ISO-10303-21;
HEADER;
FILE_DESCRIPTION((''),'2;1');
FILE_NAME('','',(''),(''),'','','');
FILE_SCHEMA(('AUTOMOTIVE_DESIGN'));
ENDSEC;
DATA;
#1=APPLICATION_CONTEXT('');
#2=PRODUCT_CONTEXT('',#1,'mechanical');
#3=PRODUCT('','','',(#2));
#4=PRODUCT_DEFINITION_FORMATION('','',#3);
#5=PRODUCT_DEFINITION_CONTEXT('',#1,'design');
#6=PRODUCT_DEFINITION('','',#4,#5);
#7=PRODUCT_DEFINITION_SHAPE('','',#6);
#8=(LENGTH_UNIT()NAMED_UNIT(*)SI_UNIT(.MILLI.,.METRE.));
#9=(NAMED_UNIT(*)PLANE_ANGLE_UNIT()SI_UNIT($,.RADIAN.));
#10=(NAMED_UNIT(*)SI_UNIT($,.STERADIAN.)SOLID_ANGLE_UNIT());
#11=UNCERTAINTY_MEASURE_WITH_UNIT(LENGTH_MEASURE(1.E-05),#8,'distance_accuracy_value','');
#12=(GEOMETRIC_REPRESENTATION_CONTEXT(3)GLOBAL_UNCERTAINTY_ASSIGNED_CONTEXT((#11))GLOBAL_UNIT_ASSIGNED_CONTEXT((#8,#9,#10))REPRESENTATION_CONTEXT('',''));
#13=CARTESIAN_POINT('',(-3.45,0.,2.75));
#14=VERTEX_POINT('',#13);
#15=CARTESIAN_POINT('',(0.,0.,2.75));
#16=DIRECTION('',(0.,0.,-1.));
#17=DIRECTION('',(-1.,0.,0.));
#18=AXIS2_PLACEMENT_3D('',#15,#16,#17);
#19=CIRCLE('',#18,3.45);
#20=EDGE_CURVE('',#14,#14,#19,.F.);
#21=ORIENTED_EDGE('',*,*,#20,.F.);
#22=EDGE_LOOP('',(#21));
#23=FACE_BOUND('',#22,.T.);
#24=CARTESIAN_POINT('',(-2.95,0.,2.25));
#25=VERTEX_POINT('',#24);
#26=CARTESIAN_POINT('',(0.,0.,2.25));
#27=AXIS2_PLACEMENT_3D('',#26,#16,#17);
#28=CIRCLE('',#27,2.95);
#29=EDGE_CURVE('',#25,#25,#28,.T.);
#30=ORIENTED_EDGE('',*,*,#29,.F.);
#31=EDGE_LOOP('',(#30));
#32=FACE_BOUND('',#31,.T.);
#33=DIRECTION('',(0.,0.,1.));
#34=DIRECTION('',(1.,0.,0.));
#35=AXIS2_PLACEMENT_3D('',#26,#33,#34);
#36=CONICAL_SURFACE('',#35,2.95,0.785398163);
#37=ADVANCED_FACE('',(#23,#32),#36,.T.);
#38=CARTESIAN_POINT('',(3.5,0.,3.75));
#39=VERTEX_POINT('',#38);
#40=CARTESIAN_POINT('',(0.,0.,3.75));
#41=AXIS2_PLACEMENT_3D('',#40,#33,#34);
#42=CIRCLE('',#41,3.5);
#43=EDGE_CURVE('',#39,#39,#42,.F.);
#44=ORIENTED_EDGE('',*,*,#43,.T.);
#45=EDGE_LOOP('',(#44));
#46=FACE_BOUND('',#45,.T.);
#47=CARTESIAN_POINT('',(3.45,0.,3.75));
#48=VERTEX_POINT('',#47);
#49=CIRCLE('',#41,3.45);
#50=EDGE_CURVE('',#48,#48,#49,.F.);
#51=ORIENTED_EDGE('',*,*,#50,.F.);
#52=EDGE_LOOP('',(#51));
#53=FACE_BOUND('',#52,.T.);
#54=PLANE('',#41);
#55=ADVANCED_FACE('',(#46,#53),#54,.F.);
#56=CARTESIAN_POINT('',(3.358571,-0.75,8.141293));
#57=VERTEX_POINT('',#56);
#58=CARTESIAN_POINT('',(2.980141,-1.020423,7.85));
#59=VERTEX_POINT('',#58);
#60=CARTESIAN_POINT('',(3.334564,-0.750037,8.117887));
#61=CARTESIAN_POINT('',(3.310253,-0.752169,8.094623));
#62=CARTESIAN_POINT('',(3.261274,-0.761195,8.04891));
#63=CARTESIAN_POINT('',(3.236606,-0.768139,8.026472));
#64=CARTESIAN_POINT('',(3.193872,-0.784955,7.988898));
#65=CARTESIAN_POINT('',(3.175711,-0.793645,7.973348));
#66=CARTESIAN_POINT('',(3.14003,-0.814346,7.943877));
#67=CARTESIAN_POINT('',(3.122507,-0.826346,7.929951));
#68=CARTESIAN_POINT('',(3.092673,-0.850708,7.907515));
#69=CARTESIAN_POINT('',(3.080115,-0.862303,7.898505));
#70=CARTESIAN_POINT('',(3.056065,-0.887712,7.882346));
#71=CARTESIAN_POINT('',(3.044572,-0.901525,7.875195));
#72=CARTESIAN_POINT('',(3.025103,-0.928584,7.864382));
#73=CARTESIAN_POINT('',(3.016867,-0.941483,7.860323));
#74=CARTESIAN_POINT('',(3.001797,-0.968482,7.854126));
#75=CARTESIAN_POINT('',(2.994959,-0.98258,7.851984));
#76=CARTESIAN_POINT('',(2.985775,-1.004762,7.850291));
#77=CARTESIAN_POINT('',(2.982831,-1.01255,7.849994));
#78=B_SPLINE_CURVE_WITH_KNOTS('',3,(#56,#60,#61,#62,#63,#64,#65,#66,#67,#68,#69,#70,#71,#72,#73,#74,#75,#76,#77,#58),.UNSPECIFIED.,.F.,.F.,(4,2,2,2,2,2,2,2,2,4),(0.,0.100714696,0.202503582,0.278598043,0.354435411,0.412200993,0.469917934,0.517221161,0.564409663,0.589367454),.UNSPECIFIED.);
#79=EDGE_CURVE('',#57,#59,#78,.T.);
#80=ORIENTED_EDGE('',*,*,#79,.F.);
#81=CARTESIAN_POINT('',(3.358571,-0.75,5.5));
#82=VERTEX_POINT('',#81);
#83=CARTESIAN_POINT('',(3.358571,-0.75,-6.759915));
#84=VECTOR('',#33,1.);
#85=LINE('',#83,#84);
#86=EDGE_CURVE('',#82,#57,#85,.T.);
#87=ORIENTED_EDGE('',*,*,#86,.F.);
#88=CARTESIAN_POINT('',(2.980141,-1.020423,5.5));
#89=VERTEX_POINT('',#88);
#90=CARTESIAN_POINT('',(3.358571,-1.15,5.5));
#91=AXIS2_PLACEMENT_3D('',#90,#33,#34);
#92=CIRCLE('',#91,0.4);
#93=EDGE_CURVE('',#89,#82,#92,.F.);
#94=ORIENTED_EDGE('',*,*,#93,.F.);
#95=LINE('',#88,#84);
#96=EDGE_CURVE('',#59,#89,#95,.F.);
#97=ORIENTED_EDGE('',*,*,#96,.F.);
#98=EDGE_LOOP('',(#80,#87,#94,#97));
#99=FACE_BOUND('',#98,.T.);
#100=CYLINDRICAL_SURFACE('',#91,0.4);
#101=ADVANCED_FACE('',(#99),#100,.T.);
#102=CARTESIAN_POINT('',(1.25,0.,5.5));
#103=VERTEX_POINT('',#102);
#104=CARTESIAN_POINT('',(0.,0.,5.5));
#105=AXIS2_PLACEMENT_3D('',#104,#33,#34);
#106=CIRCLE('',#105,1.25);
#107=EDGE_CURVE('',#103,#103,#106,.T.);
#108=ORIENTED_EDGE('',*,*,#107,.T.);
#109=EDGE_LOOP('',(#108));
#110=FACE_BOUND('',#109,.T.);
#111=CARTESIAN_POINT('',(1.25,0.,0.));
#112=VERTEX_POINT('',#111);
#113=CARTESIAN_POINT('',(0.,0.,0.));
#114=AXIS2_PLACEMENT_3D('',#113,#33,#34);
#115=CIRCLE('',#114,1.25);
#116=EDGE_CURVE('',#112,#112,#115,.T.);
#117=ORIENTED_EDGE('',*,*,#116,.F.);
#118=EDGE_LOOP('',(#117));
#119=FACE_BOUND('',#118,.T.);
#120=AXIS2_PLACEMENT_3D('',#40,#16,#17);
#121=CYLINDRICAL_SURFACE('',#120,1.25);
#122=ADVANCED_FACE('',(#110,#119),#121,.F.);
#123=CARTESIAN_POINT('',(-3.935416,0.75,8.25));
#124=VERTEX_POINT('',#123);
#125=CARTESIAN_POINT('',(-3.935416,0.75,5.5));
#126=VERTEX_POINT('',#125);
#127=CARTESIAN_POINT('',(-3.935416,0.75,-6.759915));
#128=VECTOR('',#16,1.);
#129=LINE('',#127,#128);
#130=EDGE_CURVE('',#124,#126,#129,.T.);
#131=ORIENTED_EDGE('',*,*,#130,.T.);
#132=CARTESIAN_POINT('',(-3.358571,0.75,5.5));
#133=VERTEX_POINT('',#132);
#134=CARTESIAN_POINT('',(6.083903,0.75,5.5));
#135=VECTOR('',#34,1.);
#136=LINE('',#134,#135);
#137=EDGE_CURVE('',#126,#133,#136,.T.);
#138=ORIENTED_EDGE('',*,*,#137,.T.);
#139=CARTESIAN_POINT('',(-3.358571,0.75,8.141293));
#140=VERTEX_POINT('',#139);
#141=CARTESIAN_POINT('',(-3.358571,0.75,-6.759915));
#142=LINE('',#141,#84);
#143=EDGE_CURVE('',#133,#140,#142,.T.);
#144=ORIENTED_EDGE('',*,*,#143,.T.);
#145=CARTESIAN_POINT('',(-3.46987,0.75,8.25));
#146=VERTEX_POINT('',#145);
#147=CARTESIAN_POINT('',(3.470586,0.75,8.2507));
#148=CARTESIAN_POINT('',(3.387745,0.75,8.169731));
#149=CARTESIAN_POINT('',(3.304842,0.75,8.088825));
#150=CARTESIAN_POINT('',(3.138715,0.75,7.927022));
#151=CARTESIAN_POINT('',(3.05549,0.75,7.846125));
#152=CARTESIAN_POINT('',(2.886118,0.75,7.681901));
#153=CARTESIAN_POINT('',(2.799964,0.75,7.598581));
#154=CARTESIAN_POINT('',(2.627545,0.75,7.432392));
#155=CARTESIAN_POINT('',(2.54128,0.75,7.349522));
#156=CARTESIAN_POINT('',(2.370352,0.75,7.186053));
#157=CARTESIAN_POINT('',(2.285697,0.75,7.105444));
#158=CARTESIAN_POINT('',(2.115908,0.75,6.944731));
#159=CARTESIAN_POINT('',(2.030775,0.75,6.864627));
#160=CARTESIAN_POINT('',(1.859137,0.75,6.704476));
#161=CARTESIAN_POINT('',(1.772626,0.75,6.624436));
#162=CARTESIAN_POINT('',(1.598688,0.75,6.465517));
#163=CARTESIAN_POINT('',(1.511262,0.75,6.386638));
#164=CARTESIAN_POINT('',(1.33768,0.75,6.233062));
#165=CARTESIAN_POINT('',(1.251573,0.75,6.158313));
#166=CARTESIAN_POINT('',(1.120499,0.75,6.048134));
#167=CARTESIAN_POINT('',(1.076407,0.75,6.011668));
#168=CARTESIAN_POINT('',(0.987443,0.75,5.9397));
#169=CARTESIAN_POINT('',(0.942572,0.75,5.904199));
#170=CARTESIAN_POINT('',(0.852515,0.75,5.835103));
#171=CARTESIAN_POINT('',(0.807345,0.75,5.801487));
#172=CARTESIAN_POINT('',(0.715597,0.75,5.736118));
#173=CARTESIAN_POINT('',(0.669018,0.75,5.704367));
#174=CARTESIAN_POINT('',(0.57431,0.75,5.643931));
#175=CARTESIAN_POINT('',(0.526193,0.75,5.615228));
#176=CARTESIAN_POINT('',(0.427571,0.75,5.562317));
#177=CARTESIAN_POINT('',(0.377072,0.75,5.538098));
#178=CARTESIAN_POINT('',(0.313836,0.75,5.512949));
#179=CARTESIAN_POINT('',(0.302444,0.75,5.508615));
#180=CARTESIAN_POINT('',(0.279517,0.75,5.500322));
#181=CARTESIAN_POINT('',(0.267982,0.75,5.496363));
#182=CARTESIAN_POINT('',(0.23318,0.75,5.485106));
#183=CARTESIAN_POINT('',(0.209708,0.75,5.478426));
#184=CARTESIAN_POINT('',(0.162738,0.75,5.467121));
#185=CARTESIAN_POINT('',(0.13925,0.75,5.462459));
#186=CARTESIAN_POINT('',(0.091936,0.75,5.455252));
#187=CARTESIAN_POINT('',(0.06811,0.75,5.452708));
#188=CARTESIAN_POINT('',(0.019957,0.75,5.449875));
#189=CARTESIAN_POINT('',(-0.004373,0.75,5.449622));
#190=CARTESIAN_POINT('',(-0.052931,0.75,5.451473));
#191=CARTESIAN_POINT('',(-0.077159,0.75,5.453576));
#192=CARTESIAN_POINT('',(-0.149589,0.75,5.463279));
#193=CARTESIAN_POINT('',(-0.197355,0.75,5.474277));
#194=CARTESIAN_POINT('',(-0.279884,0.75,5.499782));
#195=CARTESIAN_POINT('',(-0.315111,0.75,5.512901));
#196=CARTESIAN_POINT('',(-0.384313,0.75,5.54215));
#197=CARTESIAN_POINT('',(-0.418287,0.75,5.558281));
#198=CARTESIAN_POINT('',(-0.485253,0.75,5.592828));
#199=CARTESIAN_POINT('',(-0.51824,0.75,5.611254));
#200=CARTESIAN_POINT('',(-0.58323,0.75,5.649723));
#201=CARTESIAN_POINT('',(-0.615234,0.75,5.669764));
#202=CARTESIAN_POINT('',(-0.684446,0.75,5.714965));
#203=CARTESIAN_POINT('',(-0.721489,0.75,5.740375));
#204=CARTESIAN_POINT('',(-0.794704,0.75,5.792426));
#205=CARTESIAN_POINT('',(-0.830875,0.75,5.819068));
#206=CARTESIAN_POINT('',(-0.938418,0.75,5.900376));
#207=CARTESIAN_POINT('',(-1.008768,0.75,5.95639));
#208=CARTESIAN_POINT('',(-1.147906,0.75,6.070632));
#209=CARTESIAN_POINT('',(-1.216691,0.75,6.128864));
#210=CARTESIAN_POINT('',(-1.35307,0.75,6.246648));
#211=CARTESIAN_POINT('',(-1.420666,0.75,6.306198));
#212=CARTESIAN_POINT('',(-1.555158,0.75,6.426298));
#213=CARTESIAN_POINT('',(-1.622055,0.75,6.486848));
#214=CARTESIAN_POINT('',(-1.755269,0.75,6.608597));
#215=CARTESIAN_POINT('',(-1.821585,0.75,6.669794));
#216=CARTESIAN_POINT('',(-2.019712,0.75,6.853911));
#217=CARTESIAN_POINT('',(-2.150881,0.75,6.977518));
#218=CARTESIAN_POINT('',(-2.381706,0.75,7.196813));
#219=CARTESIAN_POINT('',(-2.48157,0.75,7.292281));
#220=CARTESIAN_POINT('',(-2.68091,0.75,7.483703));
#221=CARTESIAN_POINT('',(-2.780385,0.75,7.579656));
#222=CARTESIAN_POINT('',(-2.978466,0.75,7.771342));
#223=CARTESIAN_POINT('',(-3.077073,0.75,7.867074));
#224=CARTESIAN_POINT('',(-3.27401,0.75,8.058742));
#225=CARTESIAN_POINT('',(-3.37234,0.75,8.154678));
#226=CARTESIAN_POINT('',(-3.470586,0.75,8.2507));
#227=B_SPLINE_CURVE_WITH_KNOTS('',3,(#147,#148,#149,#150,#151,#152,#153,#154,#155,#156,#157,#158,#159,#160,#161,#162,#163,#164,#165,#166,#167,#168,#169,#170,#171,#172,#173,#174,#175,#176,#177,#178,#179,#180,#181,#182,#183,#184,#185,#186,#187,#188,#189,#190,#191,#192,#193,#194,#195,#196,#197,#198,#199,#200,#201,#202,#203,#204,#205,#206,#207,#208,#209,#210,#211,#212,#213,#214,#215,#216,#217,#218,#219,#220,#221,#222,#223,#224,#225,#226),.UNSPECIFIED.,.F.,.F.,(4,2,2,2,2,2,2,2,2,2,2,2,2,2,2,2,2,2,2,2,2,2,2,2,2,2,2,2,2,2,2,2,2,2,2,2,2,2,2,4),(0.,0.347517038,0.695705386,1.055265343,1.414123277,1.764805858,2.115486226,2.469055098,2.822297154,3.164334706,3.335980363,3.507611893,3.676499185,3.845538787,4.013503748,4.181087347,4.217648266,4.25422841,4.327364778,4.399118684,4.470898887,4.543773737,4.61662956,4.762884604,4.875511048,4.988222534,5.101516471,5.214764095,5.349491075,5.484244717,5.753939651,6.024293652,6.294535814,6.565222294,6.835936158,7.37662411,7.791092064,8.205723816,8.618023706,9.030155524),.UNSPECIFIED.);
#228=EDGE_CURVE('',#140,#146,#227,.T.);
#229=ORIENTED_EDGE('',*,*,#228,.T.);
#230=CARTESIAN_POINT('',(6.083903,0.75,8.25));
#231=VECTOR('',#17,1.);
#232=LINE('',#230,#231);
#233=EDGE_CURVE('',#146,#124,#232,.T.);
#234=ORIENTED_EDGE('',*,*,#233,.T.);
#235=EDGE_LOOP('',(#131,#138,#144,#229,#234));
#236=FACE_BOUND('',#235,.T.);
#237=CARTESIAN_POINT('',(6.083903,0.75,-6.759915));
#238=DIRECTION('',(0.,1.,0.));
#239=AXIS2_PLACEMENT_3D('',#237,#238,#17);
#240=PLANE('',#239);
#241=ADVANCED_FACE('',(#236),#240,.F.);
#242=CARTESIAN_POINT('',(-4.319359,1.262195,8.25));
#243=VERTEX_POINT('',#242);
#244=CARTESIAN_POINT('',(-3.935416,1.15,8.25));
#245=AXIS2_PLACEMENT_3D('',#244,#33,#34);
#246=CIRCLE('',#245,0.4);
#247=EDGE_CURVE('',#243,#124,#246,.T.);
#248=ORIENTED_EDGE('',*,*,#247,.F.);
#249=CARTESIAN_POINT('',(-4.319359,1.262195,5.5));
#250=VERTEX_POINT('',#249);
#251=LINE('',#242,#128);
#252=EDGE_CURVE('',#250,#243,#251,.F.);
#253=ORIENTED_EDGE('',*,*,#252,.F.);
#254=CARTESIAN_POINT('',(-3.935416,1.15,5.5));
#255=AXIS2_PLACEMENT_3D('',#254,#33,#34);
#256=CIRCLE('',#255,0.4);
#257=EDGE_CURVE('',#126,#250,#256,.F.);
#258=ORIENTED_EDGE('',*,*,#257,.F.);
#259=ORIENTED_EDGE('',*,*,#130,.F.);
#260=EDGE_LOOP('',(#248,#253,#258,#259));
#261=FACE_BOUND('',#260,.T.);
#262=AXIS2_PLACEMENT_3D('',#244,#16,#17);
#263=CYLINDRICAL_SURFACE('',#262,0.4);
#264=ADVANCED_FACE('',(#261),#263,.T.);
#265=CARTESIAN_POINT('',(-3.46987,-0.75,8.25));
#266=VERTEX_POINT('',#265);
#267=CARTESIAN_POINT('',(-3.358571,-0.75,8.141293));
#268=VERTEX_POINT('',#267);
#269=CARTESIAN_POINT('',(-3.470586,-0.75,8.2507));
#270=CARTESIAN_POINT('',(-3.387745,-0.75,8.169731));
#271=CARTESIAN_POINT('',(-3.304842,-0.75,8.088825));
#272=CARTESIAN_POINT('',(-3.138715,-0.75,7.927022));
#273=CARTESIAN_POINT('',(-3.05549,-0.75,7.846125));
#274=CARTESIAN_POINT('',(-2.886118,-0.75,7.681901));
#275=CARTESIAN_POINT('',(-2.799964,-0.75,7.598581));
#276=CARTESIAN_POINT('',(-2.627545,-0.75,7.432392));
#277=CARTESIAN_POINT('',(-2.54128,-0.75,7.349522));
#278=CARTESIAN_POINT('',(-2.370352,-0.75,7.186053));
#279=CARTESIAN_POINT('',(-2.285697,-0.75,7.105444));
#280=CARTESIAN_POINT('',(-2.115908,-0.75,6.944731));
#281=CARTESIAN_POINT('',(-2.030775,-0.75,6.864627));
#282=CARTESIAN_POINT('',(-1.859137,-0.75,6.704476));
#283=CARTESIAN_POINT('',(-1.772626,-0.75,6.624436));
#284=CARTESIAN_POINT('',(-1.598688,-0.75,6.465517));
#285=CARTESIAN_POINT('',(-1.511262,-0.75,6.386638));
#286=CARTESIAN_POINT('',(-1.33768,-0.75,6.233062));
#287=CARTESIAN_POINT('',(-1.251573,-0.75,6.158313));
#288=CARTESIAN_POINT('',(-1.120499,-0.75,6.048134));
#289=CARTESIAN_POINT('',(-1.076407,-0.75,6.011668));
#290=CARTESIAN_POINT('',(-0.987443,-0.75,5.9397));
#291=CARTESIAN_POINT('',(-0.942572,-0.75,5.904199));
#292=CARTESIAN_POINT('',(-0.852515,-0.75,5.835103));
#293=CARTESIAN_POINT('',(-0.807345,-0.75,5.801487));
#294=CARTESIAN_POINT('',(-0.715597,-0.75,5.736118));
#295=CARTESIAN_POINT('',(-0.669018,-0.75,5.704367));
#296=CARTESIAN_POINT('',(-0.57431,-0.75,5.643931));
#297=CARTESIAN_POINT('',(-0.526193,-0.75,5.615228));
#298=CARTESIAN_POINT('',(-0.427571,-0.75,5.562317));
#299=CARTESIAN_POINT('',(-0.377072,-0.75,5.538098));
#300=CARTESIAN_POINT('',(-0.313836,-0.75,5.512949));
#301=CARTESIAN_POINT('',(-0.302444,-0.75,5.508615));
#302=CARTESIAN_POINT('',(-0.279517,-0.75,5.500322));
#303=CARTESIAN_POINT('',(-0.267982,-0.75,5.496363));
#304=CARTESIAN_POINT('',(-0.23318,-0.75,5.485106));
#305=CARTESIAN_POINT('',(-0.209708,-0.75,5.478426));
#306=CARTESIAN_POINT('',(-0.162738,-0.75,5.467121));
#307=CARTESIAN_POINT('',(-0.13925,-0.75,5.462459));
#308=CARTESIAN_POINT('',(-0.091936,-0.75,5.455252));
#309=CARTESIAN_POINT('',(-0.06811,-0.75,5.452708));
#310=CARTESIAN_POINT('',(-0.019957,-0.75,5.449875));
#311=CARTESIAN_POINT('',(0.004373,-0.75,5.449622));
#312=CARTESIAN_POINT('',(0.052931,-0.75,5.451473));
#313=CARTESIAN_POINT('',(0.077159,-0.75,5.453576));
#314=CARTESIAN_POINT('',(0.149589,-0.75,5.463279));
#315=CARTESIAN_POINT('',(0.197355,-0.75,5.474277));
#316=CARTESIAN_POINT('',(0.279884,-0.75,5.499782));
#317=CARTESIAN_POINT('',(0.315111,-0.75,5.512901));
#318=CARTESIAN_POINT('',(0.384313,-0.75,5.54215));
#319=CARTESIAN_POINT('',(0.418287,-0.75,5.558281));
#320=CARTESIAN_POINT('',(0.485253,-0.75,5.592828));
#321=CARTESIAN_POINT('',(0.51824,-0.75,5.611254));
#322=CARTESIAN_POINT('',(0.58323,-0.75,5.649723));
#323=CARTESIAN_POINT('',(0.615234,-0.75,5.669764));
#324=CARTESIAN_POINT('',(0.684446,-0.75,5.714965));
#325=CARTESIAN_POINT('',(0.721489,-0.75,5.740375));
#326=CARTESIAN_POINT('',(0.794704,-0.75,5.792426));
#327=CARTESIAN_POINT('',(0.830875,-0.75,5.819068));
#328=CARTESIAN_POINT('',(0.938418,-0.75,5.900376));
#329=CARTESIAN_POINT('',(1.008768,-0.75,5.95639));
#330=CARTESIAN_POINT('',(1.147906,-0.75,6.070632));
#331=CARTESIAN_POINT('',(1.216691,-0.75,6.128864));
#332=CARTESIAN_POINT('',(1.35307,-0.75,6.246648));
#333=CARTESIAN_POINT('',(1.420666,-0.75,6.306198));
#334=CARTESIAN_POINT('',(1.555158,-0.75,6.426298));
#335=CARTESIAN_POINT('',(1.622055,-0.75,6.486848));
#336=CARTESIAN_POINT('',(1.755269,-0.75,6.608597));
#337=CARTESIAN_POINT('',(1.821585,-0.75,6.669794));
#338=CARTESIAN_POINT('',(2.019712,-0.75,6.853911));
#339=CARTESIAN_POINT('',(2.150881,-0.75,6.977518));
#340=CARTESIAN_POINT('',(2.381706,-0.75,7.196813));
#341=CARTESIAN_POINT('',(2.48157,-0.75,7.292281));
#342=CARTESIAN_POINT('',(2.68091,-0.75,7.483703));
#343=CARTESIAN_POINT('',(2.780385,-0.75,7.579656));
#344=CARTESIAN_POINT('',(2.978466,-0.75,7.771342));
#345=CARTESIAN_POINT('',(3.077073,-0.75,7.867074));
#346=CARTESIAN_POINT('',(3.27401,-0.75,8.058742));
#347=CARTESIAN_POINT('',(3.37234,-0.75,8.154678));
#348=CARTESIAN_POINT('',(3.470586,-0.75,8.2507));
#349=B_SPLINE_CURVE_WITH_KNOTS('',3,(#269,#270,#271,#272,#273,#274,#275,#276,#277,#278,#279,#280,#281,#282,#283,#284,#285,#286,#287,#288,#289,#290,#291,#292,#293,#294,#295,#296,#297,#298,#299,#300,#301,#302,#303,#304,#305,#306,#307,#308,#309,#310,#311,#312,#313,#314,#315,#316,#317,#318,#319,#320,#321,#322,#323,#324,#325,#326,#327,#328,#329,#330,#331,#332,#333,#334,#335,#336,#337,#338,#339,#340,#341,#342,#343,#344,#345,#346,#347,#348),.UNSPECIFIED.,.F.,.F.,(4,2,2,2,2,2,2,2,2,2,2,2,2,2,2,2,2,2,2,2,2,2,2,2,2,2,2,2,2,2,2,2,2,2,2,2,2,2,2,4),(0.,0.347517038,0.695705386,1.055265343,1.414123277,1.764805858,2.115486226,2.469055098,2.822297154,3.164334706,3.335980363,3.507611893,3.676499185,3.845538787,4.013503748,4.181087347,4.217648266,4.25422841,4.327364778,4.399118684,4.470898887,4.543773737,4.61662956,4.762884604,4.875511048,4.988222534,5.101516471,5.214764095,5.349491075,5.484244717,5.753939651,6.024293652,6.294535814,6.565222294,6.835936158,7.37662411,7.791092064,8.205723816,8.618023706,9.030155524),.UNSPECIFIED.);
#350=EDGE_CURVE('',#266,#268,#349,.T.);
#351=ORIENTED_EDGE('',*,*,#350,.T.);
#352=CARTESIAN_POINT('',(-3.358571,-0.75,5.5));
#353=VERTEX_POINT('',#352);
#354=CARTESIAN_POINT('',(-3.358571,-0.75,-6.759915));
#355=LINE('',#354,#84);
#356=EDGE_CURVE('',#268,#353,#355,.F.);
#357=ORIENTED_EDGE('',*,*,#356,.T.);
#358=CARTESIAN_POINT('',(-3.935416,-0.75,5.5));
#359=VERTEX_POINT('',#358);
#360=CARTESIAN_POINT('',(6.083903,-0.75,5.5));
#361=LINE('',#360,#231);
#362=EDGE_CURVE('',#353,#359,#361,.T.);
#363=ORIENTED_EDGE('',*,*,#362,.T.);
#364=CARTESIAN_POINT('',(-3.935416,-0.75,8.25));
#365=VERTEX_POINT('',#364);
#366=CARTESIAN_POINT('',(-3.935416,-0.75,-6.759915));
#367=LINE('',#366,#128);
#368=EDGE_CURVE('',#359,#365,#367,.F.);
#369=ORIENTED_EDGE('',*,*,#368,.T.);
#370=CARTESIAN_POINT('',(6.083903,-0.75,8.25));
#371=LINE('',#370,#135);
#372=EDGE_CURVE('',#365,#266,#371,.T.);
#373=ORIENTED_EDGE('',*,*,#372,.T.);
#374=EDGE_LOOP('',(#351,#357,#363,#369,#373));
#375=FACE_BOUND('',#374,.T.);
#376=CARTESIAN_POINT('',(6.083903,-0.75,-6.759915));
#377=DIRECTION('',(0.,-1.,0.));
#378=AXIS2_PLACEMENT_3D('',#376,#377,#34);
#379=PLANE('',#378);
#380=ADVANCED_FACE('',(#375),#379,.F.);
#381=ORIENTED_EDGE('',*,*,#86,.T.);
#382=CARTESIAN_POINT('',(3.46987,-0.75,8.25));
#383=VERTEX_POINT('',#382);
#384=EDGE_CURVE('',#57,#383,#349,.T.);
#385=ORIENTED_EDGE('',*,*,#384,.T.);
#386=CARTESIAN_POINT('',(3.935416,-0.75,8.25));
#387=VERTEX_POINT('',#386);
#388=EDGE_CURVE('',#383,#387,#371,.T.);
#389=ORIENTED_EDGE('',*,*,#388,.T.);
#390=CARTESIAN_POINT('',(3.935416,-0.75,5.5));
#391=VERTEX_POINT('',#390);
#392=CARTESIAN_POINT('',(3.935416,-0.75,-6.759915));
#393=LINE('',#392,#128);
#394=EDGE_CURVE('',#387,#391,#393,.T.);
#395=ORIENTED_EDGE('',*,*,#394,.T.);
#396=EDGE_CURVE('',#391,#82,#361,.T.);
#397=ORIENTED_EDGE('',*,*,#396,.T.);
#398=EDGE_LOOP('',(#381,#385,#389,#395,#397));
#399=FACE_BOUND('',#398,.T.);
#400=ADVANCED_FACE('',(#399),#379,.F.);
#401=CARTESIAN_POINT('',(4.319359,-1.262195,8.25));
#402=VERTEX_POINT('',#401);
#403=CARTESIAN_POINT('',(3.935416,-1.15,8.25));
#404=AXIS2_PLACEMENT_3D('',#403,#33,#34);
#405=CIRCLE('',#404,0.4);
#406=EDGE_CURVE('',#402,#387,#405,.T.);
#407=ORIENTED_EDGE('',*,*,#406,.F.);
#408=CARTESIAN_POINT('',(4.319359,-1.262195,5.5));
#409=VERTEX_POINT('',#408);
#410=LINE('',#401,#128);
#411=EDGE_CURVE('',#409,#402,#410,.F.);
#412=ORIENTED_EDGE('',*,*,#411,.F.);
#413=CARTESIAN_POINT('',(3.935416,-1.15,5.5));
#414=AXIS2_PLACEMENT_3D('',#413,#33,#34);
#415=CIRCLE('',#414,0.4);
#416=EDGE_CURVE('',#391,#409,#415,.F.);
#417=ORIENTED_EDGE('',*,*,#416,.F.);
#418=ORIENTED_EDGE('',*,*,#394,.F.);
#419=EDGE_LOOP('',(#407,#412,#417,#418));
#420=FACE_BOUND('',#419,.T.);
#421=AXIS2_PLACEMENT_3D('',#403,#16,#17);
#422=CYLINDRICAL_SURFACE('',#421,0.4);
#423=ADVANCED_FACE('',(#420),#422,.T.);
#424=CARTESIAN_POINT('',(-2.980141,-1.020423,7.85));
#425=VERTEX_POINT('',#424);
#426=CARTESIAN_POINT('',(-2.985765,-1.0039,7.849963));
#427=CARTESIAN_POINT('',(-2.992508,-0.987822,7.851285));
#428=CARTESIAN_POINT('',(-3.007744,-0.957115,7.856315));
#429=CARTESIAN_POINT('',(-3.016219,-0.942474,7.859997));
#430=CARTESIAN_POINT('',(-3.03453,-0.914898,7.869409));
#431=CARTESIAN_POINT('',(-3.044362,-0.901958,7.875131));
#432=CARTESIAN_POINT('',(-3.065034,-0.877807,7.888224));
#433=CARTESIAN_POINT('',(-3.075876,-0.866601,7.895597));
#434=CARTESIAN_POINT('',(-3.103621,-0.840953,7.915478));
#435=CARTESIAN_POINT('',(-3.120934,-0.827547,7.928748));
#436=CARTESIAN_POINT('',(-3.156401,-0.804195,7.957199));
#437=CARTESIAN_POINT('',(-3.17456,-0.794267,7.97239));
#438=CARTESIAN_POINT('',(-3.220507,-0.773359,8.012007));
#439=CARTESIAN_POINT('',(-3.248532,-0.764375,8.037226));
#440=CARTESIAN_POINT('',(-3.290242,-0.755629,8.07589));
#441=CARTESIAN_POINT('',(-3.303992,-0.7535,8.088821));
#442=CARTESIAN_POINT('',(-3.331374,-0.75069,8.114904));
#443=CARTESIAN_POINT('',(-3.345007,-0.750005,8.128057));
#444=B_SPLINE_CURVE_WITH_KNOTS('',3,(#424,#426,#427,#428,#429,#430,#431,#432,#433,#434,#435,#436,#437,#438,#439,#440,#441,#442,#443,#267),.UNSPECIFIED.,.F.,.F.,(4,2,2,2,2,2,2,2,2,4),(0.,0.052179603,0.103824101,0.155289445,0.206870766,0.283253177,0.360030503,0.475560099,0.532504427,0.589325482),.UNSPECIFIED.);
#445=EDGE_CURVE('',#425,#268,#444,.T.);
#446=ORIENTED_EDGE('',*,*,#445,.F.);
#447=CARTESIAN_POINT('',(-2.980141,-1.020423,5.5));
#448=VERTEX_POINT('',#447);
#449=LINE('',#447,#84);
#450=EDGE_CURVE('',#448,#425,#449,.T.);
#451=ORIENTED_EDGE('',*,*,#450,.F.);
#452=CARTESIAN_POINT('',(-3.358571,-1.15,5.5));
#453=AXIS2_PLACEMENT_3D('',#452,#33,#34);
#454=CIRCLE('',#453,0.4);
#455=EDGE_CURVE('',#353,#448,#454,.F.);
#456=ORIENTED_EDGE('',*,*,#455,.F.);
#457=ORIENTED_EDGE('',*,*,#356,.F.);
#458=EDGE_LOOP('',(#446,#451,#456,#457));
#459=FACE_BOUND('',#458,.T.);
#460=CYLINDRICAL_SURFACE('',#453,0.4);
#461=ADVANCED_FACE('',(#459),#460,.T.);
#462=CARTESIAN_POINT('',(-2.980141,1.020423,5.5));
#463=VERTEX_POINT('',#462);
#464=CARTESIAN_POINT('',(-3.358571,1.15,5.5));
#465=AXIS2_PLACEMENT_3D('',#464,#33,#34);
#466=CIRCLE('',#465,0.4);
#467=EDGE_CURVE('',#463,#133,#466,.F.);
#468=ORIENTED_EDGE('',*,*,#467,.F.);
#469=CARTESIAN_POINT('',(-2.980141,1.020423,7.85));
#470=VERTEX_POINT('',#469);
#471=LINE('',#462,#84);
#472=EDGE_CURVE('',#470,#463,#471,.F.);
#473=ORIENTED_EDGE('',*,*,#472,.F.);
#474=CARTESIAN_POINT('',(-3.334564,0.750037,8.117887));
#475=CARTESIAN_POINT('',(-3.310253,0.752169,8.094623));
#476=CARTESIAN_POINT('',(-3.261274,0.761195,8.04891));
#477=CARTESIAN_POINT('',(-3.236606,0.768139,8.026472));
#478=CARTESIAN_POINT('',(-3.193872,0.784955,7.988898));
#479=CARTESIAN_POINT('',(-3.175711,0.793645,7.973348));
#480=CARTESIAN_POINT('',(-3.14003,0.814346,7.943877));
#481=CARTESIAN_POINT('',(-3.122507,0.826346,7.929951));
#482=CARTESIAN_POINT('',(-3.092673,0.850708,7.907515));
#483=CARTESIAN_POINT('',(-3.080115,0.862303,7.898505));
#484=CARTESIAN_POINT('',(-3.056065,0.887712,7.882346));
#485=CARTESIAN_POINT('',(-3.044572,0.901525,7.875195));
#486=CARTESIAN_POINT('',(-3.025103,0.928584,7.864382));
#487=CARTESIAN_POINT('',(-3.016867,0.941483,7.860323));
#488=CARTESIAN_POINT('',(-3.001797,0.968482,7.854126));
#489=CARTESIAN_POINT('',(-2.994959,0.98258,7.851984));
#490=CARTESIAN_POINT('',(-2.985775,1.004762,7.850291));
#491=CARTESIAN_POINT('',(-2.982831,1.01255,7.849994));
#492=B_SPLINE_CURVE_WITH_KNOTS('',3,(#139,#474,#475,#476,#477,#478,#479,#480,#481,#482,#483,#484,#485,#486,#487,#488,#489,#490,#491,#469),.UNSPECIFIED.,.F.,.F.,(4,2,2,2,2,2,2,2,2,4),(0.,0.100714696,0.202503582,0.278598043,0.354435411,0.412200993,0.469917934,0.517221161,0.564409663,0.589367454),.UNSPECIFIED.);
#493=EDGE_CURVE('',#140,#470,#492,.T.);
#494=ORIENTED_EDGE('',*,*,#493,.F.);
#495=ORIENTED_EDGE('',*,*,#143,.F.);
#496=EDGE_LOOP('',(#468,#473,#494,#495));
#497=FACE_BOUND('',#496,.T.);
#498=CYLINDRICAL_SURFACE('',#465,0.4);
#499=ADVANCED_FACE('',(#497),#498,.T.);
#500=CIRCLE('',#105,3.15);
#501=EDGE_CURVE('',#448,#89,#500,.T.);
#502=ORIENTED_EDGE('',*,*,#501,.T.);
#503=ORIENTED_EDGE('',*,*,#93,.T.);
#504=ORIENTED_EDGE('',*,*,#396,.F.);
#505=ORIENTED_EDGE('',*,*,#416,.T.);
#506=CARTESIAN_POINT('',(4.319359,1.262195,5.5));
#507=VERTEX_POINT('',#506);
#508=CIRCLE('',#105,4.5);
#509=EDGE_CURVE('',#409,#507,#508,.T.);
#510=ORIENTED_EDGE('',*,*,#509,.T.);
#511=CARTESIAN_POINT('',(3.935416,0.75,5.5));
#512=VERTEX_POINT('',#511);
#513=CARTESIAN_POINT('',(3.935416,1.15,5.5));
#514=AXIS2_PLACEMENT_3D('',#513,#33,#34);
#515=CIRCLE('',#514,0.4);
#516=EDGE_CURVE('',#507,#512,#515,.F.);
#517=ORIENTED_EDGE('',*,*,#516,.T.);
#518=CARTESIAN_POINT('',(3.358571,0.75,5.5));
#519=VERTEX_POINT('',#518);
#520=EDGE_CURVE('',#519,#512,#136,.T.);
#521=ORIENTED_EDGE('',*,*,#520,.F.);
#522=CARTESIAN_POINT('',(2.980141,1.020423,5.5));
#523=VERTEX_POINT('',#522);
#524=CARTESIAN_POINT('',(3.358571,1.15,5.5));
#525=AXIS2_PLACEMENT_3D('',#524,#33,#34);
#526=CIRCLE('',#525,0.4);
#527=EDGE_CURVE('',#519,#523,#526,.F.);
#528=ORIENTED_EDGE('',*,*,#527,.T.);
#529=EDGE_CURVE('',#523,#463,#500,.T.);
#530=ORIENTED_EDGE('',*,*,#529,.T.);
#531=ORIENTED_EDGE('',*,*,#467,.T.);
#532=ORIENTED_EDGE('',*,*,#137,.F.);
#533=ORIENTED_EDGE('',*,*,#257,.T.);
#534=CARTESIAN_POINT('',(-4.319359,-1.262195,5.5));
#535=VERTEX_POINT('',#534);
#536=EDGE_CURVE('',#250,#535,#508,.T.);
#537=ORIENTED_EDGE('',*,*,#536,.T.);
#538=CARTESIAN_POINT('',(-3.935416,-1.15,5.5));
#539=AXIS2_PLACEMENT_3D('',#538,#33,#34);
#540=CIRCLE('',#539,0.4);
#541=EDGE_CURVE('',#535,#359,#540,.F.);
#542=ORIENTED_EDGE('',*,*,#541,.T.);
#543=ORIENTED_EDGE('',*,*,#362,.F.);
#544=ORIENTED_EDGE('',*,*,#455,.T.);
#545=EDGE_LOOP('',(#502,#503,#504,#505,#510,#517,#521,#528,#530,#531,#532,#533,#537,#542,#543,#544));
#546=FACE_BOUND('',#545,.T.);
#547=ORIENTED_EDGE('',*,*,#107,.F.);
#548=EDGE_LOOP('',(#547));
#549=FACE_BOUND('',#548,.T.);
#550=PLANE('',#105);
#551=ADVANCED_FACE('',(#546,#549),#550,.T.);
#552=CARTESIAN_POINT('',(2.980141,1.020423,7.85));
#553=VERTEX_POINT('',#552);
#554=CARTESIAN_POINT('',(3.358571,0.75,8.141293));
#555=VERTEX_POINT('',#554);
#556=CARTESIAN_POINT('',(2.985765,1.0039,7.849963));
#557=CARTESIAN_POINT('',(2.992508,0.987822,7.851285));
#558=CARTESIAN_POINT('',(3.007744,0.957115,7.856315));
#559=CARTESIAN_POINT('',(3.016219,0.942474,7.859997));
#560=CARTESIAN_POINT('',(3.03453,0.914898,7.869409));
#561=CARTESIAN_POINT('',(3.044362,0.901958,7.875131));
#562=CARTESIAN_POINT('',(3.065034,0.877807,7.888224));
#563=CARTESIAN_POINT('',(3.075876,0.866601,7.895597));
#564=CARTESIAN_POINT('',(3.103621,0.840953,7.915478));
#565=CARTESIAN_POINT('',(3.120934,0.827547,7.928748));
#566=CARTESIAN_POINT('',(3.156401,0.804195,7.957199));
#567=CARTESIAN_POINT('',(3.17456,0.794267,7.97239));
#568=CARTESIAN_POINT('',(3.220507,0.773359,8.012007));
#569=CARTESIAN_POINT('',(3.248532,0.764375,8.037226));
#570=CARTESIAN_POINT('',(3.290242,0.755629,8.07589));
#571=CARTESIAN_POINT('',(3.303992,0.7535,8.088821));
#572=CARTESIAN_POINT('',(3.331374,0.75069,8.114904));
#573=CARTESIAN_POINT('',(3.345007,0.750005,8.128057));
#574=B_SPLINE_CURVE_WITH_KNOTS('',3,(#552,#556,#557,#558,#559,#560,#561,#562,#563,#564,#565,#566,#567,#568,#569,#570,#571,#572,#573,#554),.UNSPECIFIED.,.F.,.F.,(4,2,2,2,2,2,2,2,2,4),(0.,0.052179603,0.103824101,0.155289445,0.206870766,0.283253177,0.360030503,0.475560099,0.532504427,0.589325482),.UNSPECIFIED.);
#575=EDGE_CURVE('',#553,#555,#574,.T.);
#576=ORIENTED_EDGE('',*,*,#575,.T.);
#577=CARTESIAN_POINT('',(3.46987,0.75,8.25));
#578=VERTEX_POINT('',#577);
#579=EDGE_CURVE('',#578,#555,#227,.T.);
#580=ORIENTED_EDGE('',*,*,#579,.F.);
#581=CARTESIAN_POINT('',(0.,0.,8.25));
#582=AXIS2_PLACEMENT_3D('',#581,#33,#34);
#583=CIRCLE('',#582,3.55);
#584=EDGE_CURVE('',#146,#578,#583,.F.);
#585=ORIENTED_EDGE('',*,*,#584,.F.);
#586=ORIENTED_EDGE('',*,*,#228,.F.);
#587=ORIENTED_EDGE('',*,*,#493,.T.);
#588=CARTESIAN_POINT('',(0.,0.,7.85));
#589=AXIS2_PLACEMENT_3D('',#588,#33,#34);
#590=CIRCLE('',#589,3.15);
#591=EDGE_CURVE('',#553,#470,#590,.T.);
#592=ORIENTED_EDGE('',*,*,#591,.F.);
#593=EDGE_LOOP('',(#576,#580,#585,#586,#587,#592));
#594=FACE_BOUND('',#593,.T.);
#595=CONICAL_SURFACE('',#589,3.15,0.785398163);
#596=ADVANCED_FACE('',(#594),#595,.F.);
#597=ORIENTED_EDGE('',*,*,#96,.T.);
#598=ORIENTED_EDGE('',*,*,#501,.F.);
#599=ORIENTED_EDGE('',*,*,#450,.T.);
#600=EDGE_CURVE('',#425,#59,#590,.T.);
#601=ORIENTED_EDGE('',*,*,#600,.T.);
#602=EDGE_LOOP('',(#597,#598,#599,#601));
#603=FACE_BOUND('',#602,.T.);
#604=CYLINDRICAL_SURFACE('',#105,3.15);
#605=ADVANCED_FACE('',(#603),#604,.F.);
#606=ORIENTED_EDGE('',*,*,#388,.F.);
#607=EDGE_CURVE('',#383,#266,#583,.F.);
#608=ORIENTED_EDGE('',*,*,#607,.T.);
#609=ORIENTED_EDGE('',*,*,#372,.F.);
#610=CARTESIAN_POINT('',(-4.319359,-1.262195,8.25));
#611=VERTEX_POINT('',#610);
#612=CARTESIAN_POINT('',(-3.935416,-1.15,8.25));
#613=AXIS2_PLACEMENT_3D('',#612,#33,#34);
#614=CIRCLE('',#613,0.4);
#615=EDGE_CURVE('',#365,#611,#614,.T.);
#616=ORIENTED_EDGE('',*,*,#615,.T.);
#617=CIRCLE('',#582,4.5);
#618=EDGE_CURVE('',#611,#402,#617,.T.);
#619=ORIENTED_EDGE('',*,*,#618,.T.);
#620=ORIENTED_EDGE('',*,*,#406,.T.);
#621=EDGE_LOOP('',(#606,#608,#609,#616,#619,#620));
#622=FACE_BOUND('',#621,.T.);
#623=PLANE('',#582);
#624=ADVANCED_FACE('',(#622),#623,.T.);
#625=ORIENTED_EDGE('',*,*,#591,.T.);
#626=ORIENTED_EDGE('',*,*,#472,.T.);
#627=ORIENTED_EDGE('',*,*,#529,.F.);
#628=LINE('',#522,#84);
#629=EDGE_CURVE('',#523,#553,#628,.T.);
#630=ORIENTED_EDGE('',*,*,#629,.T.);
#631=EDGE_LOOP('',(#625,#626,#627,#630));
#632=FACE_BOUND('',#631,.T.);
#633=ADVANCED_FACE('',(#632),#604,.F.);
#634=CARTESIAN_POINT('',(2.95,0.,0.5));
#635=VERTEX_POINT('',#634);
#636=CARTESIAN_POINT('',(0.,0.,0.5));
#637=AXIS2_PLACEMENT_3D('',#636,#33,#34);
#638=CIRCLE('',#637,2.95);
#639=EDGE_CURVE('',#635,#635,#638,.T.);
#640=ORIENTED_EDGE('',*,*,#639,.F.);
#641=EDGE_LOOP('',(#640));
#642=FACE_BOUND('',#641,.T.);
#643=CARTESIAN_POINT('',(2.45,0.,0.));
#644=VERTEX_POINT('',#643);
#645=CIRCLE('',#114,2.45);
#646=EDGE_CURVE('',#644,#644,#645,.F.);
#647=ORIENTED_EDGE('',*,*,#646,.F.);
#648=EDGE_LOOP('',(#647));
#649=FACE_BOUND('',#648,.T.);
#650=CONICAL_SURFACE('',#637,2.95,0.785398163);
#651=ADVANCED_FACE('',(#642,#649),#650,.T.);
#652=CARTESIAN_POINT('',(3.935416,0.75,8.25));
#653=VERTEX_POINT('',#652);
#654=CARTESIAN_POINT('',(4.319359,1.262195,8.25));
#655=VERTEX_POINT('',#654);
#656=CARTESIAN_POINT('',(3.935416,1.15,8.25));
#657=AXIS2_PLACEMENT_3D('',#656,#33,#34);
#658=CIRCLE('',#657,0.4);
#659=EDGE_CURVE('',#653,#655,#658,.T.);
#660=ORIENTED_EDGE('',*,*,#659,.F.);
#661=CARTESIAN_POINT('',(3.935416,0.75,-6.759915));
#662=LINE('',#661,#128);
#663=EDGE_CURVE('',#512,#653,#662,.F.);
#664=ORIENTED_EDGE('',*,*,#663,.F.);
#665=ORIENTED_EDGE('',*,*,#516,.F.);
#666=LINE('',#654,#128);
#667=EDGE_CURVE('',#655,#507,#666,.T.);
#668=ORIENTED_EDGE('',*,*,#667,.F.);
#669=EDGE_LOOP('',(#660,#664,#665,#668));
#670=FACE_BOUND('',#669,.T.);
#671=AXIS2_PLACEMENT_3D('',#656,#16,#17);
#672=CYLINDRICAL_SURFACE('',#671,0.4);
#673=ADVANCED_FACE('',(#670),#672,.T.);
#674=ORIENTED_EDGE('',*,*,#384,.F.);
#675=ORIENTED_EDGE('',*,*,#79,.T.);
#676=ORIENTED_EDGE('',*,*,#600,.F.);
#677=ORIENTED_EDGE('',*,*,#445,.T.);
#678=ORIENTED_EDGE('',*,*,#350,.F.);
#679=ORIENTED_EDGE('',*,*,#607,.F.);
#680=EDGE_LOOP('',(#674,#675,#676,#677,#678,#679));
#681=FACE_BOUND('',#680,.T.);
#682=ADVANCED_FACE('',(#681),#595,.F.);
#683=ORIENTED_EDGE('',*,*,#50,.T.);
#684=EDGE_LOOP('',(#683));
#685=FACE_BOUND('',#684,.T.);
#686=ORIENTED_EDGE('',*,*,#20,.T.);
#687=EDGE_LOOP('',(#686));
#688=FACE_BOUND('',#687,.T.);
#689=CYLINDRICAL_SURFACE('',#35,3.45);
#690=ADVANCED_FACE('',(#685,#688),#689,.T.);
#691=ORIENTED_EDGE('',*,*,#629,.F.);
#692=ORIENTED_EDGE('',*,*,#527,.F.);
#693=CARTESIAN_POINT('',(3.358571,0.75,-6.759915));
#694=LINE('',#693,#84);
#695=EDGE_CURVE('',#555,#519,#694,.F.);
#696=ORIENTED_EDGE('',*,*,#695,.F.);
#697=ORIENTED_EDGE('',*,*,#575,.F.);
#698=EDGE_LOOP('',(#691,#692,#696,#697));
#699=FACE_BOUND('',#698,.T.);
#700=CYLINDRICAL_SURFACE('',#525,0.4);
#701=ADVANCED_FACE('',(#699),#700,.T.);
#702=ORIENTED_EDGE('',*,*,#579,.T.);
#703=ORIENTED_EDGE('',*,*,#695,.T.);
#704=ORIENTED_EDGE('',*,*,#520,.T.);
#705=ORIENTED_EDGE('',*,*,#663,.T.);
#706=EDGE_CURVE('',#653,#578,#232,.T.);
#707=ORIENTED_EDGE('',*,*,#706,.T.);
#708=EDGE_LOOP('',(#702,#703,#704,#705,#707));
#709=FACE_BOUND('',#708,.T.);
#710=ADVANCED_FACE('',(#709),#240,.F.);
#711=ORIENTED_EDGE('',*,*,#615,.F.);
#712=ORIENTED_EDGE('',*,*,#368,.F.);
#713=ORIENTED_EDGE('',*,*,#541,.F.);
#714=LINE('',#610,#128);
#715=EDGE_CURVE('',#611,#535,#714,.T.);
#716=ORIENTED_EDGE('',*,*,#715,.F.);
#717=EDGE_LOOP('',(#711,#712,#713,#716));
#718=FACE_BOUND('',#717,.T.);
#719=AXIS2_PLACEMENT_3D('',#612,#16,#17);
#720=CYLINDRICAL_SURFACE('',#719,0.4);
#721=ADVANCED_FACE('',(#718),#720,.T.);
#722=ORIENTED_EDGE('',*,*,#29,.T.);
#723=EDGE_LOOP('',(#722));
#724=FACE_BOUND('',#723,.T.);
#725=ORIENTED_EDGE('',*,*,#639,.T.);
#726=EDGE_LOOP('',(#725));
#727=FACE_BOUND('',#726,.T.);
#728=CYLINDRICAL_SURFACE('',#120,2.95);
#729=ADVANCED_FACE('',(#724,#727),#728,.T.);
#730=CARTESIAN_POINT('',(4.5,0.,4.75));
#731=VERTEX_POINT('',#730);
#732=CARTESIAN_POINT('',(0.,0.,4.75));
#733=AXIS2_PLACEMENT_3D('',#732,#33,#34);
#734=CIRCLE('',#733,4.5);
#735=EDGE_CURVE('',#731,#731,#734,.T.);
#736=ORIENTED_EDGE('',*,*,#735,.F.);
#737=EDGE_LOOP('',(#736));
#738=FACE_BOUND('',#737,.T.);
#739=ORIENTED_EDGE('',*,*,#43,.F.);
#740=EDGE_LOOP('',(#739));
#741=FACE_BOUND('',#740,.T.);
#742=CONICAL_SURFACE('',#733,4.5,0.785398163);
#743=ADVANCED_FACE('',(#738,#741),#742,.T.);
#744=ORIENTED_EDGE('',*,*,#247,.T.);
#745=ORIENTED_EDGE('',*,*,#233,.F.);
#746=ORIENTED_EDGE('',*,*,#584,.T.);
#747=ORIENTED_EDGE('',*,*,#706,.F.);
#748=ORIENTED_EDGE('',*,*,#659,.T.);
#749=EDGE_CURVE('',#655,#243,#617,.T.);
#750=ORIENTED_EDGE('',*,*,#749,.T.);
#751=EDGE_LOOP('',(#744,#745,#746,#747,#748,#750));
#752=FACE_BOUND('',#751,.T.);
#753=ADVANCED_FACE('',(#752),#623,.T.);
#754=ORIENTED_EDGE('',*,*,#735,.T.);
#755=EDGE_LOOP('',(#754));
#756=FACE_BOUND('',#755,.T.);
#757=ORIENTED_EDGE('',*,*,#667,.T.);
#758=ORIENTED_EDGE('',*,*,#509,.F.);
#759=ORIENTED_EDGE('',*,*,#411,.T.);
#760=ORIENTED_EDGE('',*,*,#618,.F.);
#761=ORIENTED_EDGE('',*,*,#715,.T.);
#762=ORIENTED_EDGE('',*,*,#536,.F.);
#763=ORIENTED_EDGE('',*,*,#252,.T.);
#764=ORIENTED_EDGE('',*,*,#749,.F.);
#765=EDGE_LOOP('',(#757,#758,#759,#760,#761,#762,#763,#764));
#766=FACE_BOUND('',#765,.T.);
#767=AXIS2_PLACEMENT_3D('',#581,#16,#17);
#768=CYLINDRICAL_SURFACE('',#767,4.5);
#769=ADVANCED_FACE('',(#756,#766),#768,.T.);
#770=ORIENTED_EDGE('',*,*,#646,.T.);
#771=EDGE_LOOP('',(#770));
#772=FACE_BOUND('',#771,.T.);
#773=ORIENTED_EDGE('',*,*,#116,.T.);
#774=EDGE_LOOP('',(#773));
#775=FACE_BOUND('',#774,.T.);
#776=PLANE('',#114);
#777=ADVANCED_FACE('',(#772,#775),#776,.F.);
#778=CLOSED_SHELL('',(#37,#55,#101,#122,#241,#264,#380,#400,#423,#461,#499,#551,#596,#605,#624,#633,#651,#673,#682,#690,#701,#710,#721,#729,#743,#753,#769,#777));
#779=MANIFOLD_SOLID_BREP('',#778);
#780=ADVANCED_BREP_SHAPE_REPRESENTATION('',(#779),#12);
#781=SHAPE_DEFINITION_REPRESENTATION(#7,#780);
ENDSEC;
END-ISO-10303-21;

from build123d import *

# Parameters (mm, degrees)
SKETCH1_R           = 2.95
SKETCH1_R_2         = 1.25
BOSS_EXTRUDE1_DEPTH = 3.75
SKETCH2_R           = 4.5
SKETCH2_R_2         = 1.25
BOSS_EXTRUDE2_DEPTH = 4.5
SKETCH3_R           = 3.15
CUT_EXTRUDE1_DEPTH  = 2.75
CHAMFER1_SIZE       = 0.4
CHAMFER2_SIZE       = 0.5
BOSS_EXTRUDE3_START = 1.5
SKETCH4_R           = 3.45
SKETCH4_R_2         = 1.25
BOSS_EXTRUDE3_DEPTH = 1.5
CHAMFER3_SIZE       = 1
CHAMFER6_SIZE       = 0.5
CUT_EXTRUDE2_REACH  = 12.419
SKETCH5_W           = 12.167806538
SKETCH5_H           = 1.5
FILLET1_R           = 0.4


with BuildPart() as part:
    # Sketch1 → Boss-Extrude1 (new body)
    with BuildSketch(Plane.XY):
        Circle(SKETCH1_R)
        Circle(SKETCH1_R_2, mode=Mode.SUBTRACT)
    extrude(amount=BOSS_EXTRUDE1_DEPTH)

    # Sketch2 → Boss-Extrude2 (add)
    with BuildSketch(Plane.XY.offset(3.75)):
        Circle(SKETCH2_R)
        Circle(SKETCH2_R_2, mode=Mode.SUBTRACT)
    extrude(amount=BOSS_EXTRUDE2_DEPTH)

    # Sketch3 → Cut-Extrude1 (cut)
    with BuildSketch(Plane.XY.offset(8.25)):
        Circle(SKETCH3_R)
    extrude(amount=-CUT_EXTRUDE1_DEPTH, mode=Mode.SUBTRACT)

    # Chamfer1
    chamfer1_edges = [part.edges().sort_by_distance(p)[0] for p in [
        (-3.15, 0, 8.25),
    ]]
    chamfer(chamfer1_edges, length=CHAMFER1_SIZE)

    # Chamfer2
    chamfer2_edges = [part.edges().sort_by_distance(p)[0] for p in [
        (-2.95, 0, 0),
    ]]
    chamfer(chamfer2_edges, length=CHAMFER2_SIZE)

    # Sketch4 → Boss-Extrude3 (add)
    with BuildSketch(Plane(origin=(0, 0, 3.75), x_dir=(-1, 0, 0), z_dir=(0, 0, -1)).offset(BOSS_EXTRUDE3_START)):
        with Locations(Location((0, 0, 0), (0, 0, 180))):
            Circle(SKETCH4_R)
        with Locations(Location((0, 0, 0), (0, 0, 180))):
            Circle(SKETCH4_R_2, mode=Mode.SUBTRACT)
    extrude(amount=-BOSS_EXTRUDE3_DEPTH)

    # Chamfer3
    chamfer3_edges = [part.edges().sort_by_distance(p)[0] for p in [
        (-4.5, 0, 3.75),
    ]]
    chamfer(chamfer3_edges, length=CHAMFER3_SIZE)

    # Chamfer6
    chamfer6_edges = [part.edges().sort_by_distance(p)[0] for p in [
        (-3.45, 0, 2.25),
    ]]
    chamfer(chamfer6_edges, length=CHAMFER6_SIZE - 0.0001)  # a hair under: the kernel refuses the full size

    # Cut-Extrude2: up to this face of the body (flat: up to its plane)
    cut_extrude2_end = Plane(part.part.faces().sort_by_distance((-3.060904546, 0, 5.5))[0])
    # Sketch5 → Cut-Extrude2 (cut, up to the picked face)
    with BuildSketch(Plane.XY.offset(8.25), mode=Mode.PRIVATE) as cut_extrude2_sk1:
        Rectangle(SKETCH5_W, SKETCH5_H)
    cut_extrude2_tool1 = split(extrude(cut_extrude2_sk1.sketch, amount=-CUT_EXTRUDE2_REACH, mode=Mode.PRIVATE), bisect_by=cut_extrude2_end, keep=Keep.BOTH, mode=Mode.PRIVATE)
    add(cut_extrude2_tool1.solids().sort_by(Axis((0, 0, 8.25), (0, 0, -1)))[0], mode=Mode.SUBTRACT)

    # Fillet1
    fillet1_edges = [part.edges().sort_by_distance(p)[0] for p in [
        (3.059411708, -0.75, 6.675),
        (-3.059411708, -0.75, 6.675),
        (4.437059837, -0.75, 6.875),
        (-4.437059837, -0.75, 6.875),
        (-3.059411708, 0.75, 6.675),
        (3.059411708, 0.75, 6.675),
        (-4.437059837, 0.75, 6.875),
        (4.437059837, 0.75, 6.875),
    ]]
    fillet(fillet1_edges, radius=FILLET1_R)


solid = part.part
